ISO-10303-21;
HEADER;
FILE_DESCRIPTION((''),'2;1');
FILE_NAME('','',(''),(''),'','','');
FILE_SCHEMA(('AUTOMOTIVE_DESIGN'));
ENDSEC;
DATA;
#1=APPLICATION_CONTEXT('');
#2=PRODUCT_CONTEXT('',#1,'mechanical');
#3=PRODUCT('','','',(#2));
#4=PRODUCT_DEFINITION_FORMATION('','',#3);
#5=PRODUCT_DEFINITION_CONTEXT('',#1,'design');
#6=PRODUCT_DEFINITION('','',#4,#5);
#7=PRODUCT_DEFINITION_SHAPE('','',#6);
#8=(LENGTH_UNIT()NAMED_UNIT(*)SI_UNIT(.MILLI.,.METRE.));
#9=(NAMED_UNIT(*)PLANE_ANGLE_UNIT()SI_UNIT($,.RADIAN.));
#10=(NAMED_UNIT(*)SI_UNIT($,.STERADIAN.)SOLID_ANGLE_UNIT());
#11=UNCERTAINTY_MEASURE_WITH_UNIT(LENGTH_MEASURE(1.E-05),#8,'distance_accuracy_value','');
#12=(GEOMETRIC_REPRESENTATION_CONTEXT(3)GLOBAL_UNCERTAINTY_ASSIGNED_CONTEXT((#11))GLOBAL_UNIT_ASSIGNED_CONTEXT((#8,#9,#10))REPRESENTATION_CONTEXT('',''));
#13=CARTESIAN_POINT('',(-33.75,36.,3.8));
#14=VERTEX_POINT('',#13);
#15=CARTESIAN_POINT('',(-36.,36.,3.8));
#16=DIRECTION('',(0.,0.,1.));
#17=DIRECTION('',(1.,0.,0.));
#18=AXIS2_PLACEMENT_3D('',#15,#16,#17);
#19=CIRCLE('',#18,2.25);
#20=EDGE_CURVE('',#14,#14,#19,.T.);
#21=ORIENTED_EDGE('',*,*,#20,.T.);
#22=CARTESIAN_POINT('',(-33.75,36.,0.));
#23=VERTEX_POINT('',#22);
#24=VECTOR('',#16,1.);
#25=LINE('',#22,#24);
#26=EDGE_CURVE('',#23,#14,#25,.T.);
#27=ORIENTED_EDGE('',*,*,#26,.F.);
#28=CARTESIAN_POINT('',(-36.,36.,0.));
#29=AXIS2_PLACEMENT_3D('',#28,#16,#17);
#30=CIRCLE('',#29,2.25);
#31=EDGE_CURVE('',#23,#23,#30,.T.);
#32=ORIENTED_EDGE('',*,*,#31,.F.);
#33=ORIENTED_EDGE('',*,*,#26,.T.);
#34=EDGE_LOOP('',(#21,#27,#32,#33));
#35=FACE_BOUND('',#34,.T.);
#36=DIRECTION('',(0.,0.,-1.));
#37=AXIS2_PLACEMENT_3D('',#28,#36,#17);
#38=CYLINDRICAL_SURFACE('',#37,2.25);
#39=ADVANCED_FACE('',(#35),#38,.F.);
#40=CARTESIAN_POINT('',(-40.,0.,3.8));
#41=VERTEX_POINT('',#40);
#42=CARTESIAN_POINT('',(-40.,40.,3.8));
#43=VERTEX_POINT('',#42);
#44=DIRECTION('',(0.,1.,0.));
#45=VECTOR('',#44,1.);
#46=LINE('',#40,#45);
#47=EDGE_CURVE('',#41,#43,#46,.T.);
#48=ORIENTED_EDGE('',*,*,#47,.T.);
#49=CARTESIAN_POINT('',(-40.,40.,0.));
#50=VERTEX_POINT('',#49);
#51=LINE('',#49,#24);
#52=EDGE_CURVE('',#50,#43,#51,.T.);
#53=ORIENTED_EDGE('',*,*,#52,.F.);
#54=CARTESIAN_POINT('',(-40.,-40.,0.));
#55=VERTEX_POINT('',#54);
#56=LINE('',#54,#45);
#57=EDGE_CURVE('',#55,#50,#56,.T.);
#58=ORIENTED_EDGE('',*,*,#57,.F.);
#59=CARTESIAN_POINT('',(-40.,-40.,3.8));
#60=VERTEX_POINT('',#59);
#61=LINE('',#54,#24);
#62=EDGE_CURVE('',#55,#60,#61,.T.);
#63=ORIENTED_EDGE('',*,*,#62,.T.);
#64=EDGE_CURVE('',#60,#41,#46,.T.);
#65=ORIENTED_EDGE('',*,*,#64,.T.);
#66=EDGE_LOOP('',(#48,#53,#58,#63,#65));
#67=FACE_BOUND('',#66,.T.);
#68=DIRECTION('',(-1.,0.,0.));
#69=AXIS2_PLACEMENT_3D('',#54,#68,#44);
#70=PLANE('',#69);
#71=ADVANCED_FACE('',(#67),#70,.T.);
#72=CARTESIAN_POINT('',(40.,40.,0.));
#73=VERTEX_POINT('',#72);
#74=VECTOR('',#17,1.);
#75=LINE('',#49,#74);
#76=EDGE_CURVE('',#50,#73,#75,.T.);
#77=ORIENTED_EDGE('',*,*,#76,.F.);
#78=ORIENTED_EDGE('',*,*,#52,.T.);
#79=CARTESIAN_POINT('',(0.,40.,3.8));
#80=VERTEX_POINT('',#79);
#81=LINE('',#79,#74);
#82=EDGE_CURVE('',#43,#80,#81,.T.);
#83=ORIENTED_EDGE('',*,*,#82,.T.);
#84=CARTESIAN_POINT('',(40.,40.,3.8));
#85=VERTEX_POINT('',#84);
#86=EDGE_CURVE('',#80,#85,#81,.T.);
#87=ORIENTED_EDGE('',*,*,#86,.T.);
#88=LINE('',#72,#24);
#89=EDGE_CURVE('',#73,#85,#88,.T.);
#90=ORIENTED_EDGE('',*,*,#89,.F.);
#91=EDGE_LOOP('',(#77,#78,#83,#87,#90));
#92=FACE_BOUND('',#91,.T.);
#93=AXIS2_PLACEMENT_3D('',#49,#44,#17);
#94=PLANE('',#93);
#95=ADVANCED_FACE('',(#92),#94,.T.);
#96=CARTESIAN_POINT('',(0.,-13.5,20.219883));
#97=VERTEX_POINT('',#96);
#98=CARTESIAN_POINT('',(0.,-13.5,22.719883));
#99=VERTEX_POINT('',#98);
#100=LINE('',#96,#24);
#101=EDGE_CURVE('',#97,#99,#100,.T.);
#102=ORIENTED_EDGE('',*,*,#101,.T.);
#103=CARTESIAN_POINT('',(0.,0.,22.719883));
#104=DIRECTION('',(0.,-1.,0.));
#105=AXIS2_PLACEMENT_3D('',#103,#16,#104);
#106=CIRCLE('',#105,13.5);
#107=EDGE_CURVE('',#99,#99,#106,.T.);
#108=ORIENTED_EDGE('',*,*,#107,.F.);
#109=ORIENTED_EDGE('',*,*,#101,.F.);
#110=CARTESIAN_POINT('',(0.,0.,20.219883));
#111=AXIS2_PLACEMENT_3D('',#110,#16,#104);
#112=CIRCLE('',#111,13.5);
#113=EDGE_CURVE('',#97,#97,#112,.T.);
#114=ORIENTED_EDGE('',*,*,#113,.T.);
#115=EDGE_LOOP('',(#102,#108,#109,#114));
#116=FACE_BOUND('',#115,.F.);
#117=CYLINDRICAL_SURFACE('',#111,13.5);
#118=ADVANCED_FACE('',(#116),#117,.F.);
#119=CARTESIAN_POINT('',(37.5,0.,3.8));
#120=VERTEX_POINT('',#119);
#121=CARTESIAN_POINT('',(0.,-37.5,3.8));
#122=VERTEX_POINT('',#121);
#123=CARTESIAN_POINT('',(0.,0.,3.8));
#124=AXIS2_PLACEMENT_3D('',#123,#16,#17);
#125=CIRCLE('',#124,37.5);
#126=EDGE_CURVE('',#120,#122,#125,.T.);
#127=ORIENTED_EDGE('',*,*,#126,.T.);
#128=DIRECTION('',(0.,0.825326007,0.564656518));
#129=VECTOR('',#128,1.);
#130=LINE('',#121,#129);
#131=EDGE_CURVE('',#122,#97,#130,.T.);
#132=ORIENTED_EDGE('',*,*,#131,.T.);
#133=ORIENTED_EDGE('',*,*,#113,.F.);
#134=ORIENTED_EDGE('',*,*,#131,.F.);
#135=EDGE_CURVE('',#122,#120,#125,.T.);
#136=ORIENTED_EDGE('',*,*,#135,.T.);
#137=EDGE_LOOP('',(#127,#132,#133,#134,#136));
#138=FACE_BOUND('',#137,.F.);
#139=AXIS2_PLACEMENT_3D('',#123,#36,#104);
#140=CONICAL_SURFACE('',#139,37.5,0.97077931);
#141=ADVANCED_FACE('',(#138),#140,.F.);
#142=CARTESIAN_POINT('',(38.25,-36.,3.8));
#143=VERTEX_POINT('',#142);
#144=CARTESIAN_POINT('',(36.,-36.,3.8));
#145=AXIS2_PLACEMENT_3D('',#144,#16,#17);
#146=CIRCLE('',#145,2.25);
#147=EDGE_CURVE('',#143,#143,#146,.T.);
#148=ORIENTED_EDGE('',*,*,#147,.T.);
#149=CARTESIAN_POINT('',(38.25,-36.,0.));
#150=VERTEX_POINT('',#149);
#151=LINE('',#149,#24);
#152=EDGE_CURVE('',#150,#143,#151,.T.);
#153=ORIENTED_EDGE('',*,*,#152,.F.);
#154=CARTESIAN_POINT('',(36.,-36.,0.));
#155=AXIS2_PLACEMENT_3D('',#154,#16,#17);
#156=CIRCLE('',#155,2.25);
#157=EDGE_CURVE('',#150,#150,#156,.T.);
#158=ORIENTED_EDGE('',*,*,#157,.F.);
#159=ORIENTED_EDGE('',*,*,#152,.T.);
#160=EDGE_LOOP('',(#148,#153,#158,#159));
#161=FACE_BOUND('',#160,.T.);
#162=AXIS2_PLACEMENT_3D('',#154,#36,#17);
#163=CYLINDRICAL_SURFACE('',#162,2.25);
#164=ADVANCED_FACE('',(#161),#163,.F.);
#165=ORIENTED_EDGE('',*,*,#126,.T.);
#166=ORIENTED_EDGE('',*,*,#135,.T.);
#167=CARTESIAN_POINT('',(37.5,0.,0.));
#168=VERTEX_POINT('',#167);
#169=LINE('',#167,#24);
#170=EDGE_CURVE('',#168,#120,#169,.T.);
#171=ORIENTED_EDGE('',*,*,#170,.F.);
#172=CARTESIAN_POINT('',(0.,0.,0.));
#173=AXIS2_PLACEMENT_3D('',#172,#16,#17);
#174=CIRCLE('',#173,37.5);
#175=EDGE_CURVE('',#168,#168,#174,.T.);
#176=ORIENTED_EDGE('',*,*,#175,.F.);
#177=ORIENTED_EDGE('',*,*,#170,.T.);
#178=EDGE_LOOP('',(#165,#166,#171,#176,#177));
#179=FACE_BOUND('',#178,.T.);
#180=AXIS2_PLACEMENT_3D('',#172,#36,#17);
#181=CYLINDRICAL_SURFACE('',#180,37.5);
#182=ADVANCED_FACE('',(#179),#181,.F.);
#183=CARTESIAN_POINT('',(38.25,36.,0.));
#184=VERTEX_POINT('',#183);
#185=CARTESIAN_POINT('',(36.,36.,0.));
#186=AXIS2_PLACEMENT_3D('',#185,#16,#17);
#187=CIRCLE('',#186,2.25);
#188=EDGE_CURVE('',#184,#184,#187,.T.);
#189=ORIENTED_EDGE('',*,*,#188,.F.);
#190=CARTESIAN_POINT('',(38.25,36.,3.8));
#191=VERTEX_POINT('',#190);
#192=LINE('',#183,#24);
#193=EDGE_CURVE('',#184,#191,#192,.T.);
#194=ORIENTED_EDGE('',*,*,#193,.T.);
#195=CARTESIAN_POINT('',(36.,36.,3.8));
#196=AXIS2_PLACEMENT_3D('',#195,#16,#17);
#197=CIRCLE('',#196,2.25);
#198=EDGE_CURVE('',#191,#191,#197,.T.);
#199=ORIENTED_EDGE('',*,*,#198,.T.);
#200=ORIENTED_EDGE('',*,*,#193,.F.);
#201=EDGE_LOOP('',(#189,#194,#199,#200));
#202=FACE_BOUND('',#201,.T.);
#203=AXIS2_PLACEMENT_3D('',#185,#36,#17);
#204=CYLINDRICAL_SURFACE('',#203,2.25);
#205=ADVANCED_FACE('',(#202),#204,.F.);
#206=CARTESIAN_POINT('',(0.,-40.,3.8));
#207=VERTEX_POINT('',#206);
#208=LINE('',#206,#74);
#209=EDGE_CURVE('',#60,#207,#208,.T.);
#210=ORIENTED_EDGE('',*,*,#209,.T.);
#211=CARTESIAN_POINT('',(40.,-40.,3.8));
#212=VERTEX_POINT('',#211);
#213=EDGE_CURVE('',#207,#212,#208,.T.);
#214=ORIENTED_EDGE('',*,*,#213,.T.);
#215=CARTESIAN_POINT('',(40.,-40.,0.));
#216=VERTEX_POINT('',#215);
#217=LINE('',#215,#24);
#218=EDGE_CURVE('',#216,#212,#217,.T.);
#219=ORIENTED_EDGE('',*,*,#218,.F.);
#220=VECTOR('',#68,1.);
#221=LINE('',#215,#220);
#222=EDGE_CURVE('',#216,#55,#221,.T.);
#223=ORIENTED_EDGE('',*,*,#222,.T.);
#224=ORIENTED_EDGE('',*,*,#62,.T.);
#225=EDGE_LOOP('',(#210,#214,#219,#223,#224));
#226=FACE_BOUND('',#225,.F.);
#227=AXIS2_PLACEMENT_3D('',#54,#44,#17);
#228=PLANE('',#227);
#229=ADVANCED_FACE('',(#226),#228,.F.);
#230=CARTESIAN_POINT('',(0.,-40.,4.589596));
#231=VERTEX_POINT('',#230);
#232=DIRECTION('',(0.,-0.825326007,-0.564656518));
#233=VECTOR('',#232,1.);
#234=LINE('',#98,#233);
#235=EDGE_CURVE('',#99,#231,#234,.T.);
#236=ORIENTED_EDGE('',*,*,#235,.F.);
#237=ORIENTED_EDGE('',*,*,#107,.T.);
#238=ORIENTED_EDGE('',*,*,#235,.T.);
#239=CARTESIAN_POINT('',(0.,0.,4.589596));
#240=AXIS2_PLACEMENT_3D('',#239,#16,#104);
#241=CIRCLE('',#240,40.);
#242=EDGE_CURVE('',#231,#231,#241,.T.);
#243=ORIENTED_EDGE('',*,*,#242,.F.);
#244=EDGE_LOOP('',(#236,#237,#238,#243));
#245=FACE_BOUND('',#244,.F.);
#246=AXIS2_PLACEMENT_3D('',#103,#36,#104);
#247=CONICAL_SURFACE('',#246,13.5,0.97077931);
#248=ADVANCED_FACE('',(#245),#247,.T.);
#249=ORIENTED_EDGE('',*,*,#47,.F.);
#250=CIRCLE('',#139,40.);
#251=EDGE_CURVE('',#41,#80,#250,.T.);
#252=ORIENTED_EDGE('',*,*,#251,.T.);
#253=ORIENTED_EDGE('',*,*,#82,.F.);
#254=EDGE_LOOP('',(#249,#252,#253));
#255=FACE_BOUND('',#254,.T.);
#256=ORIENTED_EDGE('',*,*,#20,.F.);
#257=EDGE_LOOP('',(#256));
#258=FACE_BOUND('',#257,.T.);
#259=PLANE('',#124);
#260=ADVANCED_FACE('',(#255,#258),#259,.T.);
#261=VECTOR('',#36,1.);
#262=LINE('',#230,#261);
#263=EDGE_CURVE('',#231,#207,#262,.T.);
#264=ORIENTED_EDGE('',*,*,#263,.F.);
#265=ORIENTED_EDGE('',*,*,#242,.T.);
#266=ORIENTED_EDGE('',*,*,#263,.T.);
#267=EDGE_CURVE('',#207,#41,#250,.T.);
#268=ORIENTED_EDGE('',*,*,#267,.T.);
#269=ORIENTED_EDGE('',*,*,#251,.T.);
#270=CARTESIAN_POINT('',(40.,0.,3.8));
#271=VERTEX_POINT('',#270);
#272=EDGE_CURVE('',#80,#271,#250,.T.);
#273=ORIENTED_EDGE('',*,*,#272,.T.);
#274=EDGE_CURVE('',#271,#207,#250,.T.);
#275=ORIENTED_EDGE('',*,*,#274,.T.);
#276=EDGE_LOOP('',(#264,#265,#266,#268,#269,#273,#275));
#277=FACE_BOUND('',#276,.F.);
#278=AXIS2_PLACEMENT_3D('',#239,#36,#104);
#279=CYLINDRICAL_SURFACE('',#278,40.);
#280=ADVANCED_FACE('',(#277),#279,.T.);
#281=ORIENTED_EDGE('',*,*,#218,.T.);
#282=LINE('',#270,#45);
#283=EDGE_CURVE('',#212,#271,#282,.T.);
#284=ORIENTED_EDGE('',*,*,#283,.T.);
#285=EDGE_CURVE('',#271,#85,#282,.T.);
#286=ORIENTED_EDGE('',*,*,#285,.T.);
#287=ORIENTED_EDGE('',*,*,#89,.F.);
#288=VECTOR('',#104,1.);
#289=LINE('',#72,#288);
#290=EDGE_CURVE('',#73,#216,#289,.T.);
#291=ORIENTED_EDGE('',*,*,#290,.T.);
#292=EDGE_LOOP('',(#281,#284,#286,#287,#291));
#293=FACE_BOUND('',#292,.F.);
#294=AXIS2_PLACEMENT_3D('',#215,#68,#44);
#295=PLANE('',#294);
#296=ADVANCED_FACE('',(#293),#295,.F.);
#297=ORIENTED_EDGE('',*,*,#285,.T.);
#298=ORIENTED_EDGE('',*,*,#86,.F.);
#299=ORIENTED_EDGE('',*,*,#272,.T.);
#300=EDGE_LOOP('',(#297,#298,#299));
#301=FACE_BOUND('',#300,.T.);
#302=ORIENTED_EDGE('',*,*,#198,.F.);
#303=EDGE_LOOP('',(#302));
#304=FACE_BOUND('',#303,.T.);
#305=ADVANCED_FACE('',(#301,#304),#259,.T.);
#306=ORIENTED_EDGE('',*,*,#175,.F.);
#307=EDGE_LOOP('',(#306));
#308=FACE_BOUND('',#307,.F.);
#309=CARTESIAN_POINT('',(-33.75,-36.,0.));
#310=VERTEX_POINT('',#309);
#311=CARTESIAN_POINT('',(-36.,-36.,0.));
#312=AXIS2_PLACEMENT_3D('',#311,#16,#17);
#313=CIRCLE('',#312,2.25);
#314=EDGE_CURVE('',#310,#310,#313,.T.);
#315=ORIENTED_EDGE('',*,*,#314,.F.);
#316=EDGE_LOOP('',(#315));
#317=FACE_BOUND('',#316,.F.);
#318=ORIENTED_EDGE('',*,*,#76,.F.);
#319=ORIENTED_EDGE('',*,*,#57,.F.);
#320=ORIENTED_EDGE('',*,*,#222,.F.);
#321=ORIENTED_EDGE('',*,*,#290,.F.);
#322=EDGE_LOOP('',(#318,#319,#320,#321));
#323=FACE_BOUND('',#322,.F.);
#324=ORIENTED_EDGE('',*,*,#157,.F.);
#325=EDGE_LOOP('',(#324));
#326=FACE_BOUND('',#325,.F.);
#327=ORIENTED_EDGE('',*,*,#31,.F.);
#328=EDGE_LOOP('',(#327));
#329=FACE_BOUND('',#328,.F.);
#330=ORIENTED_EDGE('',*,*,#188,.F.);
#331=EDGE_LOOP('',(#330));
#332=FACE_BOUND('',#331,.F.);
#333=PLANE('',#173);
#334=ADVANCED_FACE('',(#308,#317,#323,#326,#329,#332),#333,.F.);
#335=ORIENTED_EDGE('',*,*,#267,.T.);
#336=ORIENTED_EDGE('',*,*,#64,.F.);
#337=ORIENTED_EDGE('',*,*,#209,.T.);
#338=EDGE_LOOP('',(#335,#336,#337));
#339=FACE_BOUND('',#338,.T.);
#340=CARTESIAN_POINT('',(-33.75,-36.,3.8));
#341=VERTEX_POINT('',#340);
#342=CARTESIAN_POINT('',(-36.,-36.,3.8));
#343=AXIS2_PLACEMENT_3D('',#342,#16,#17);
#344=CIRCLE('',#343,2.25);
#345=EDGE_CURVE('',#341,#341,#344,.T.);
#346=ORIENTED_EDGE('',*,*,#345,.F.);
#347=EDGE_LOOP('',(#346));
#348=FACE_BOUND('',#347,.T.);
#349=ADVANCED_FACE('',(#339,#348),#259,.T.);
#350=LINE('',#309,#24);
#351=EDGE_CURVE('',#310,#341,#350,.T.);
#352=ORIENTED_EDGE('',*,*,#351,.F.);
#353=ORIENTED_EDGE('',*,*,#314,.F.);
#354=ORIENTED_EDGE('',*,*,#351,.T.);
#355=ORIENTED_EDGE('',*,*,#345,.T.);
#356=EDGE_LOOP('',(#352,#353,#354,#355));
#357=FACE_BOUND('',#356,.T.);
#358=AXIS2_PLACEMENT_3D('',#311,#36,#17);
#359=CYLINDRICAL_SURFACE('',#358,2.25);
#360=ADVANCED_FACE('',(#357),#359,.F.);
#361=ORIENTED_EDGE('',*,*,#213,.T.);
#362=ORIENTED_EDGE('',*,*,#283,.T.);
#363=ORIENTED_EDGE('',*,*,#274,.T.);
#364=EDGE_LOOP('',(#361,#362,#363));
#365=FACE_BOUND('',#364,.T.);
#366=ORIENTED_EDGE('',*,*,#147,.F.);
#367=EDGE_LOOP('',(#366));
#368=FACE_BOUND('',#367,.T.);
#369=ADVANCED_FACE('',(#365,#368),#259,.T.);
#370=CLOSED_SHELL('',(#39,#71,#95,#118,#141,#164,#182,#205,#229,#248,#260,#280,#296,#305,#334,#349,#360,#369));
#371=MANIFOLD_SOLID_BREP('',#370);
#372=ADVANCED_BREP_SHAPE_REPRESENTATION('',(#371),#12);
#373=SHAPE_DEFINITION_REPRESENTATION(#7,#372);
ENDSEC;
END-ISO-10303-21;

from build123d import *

# Parameters (mm, degrees)
F0_W     = 80
F0_H     = 80
F0_R     = 2.25
F0_R_2   = 37.5
F1_DEPTH = 3.8


# Not quite as in the source:
# - a feature names something its author has since deleted; it is built from what else it names


with BuildPart() as f1:
    # F0 (on Top) → F1 (new body)
    with BuildSketch(Plane.XY):
        Rectangle(F0_W, F0_H)
        with Locations((-36, -36)):
            Circle(F0_R, mode=Mode.SUBTRACT)
        with Locations((36, -36)):
            Circle(F0_R, mode=Mode.SUBTRACT)
        with Locations((-36, 36)):
            Circle(F0_R, mode=Mode.SUBTRACT)
        Circle(F0_R_2, mode=Mode.SUBTRACT)
        with Locations((36, 36)):
            Circle(F0_R, mode=Mode.SUBTRACT)
    extrude(amount=F1_DEPTH)

    # F2 (on Right) → F3 (revolve)
    with BuildSketch(Plane.YZ):
        Polygon((-40, 0), (-37.5, 0), (-37.5, 3.8), (-13.5, 20.2198829502), (-13.5, 22.7198829502), (-40, 4.589595526), (-40, 3.8), align=None)
    revolve(axis=Axis((0, 0, 27.8761722147), (0, 0, 1)))


solid = f1.part
